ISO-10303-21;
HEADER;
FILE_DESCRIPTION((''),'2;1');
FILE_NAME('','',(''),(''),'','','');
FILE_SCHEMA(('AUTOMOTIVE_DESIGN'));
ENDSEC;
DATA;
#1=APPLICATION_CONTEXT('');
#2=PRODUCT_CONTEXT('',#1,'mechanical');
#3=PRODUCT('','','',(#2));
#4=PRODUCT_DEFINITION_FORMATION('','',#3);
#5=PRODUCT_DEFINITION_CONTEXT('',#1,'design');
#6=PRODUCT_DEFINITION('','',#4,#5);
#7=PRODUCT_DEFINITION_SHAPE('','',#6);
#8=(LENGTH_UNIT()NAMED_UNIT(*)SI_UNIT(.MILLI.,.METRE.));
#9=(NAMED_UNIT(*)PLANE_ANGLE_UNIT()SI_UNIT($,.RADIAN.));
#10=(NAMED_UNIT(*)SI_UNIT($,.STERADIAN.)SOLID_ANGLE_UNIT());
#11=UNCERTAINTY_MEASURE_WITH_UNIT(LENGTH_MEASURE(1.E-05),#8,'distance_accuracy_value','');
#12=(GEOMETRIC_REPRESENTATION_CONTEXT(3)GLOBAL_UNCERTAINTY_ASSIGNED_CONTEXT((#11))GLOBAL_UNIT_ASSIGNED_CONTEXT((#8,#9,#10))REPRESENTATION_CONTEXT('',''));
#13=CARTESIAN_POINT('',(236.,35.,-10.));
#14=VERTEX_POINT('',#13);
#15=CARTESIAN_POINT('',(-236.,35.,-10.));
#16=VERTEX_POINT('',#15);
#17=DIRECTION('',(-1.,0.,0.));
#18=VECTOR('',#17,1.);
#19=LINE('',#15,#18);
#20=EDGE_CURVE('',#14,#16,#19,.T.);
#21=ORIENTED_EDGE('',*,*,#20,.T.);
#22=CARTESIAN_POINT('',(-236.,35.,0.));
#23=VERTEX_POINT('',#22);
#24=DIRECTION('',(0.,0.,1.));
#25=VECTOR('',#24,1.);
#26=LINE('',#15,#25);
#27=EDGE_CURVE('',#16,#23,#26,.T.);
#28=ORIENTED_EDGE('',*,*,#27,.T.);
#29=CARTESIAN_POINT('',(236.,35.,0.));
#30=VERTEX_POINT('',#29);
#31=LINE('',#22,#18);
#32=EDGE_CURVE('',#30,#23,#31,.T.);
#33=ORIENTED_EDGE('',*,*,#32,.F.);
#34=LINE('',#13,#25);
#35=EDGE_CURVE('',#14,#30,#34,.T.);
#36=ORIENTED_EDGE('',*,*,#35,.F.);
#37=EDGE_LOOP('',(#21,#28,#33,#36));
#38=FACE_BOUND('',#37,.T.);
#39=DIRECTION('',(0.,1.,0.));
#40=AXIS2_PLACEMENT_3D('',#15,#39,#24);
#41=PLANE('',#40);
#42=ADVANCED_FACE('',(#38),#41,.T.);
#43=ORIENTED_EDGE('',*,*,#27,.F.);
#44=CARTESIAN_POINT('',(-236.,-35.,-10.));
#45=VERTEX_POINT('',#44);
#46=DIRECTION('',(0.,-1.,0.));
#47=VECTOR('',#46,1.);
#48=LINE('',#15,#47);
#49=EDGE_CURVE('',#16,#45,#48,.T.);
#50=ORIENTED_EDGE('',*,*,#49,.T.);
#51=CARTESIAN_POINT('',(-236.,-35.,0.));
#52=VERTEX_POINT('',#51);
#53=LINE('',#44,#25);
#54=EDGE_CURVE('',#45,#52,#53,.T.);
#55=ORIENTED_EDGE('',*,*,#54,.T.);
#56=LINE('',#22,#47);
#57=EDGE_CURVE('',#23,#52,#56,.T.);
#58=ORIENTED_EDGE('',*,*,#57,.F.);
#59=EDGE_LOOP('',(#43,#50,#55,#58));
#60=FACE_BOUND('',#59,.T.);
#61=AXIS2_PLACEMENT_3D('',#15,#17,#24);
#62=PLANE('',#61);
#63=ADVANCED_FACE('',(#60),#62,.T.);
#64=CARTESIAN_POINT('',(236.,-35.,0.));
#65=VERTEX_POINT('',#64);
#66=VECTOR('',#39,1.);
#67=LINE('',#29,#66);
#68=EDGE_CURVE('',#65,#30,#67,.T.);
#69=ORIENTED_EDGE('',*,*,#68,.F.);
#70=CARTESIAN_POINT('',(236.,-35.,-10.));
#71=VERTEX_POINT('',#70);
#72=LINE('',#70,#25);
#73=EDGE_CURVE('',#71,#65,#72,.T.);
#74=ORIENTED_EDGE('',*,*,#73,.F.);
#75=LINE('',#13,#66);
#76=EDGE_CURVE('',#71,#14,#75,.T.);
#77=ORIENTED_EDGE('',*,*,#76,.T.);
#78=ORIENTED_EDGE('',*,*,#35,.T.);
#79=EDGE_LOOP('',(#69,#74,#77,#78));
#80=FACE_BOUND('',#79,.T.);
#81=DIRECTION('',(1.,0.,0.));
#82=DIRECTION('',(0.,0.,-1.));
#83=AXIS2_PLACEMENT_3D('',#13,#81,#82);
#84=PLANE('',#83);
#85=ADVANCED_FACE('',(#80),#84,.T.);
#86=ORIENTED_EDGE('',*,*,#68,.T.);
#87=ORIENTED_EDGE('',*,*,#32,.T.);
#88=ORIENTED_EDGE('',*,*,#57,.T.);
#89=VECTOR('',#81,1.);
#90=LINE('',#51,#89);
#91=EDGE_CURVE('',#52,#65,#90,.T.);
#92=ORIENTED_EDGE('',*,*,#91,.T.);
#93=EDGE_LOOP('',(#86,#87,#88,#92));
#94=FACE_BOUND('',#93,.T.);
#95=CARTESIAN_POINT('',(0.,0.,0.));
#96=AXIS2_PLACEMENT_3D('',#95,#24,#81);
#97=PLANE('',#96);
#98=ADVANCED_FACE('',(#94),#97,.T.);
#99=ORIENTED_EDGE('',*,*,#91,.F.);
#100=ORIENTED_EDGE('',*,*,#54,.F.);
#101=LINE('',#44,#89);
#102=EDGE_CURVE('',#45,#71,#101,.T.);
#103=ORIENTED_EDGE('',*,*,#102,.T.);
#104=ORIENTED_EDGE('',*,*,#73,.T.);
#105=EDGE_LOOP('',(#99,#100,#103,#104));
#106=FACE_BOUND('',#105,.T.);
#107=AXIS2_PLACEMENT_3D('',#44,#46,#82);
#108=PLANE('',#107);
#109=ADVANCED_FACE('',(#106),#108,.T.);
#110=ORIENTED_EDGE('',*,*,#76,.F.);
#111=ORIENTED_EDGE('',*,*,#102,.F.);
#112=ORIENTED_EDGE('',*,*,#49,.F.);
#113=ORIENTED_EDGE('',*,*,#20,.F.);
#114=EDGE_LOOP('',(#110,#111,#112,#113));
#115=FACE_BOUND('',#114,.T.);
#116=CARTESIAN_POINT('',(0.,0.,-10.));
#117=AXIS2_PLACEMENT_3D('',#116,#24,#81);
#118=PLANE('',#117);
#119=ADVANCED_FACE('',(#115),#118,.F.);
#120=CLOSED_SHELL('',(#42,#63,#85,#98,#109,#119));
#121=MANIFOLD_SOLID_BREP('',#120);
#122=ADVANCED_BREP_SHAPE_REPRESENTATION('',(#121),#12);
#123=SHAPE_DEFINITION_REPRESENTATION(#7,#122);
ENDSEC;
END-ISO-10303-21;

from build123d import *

# Parameters (mm, degrees)
SKETCH_1_W             = 472
SKETCH_1_H             = 70
SM_BASE_FLANGE_1_DEPTH = 10


# Sheet-metal steps are written as plain solids
with BuildPart() as part:
    # Sketch 1 → 基体-法兰1 (new body)
    with BuildSketch(Plane.XY):
        Rectangle(SKETCH_1_W, SKETCH_1_H)
    extrude(amount=-SM_BASE_FLANGE_1_DEPTH)


solid = part.part
